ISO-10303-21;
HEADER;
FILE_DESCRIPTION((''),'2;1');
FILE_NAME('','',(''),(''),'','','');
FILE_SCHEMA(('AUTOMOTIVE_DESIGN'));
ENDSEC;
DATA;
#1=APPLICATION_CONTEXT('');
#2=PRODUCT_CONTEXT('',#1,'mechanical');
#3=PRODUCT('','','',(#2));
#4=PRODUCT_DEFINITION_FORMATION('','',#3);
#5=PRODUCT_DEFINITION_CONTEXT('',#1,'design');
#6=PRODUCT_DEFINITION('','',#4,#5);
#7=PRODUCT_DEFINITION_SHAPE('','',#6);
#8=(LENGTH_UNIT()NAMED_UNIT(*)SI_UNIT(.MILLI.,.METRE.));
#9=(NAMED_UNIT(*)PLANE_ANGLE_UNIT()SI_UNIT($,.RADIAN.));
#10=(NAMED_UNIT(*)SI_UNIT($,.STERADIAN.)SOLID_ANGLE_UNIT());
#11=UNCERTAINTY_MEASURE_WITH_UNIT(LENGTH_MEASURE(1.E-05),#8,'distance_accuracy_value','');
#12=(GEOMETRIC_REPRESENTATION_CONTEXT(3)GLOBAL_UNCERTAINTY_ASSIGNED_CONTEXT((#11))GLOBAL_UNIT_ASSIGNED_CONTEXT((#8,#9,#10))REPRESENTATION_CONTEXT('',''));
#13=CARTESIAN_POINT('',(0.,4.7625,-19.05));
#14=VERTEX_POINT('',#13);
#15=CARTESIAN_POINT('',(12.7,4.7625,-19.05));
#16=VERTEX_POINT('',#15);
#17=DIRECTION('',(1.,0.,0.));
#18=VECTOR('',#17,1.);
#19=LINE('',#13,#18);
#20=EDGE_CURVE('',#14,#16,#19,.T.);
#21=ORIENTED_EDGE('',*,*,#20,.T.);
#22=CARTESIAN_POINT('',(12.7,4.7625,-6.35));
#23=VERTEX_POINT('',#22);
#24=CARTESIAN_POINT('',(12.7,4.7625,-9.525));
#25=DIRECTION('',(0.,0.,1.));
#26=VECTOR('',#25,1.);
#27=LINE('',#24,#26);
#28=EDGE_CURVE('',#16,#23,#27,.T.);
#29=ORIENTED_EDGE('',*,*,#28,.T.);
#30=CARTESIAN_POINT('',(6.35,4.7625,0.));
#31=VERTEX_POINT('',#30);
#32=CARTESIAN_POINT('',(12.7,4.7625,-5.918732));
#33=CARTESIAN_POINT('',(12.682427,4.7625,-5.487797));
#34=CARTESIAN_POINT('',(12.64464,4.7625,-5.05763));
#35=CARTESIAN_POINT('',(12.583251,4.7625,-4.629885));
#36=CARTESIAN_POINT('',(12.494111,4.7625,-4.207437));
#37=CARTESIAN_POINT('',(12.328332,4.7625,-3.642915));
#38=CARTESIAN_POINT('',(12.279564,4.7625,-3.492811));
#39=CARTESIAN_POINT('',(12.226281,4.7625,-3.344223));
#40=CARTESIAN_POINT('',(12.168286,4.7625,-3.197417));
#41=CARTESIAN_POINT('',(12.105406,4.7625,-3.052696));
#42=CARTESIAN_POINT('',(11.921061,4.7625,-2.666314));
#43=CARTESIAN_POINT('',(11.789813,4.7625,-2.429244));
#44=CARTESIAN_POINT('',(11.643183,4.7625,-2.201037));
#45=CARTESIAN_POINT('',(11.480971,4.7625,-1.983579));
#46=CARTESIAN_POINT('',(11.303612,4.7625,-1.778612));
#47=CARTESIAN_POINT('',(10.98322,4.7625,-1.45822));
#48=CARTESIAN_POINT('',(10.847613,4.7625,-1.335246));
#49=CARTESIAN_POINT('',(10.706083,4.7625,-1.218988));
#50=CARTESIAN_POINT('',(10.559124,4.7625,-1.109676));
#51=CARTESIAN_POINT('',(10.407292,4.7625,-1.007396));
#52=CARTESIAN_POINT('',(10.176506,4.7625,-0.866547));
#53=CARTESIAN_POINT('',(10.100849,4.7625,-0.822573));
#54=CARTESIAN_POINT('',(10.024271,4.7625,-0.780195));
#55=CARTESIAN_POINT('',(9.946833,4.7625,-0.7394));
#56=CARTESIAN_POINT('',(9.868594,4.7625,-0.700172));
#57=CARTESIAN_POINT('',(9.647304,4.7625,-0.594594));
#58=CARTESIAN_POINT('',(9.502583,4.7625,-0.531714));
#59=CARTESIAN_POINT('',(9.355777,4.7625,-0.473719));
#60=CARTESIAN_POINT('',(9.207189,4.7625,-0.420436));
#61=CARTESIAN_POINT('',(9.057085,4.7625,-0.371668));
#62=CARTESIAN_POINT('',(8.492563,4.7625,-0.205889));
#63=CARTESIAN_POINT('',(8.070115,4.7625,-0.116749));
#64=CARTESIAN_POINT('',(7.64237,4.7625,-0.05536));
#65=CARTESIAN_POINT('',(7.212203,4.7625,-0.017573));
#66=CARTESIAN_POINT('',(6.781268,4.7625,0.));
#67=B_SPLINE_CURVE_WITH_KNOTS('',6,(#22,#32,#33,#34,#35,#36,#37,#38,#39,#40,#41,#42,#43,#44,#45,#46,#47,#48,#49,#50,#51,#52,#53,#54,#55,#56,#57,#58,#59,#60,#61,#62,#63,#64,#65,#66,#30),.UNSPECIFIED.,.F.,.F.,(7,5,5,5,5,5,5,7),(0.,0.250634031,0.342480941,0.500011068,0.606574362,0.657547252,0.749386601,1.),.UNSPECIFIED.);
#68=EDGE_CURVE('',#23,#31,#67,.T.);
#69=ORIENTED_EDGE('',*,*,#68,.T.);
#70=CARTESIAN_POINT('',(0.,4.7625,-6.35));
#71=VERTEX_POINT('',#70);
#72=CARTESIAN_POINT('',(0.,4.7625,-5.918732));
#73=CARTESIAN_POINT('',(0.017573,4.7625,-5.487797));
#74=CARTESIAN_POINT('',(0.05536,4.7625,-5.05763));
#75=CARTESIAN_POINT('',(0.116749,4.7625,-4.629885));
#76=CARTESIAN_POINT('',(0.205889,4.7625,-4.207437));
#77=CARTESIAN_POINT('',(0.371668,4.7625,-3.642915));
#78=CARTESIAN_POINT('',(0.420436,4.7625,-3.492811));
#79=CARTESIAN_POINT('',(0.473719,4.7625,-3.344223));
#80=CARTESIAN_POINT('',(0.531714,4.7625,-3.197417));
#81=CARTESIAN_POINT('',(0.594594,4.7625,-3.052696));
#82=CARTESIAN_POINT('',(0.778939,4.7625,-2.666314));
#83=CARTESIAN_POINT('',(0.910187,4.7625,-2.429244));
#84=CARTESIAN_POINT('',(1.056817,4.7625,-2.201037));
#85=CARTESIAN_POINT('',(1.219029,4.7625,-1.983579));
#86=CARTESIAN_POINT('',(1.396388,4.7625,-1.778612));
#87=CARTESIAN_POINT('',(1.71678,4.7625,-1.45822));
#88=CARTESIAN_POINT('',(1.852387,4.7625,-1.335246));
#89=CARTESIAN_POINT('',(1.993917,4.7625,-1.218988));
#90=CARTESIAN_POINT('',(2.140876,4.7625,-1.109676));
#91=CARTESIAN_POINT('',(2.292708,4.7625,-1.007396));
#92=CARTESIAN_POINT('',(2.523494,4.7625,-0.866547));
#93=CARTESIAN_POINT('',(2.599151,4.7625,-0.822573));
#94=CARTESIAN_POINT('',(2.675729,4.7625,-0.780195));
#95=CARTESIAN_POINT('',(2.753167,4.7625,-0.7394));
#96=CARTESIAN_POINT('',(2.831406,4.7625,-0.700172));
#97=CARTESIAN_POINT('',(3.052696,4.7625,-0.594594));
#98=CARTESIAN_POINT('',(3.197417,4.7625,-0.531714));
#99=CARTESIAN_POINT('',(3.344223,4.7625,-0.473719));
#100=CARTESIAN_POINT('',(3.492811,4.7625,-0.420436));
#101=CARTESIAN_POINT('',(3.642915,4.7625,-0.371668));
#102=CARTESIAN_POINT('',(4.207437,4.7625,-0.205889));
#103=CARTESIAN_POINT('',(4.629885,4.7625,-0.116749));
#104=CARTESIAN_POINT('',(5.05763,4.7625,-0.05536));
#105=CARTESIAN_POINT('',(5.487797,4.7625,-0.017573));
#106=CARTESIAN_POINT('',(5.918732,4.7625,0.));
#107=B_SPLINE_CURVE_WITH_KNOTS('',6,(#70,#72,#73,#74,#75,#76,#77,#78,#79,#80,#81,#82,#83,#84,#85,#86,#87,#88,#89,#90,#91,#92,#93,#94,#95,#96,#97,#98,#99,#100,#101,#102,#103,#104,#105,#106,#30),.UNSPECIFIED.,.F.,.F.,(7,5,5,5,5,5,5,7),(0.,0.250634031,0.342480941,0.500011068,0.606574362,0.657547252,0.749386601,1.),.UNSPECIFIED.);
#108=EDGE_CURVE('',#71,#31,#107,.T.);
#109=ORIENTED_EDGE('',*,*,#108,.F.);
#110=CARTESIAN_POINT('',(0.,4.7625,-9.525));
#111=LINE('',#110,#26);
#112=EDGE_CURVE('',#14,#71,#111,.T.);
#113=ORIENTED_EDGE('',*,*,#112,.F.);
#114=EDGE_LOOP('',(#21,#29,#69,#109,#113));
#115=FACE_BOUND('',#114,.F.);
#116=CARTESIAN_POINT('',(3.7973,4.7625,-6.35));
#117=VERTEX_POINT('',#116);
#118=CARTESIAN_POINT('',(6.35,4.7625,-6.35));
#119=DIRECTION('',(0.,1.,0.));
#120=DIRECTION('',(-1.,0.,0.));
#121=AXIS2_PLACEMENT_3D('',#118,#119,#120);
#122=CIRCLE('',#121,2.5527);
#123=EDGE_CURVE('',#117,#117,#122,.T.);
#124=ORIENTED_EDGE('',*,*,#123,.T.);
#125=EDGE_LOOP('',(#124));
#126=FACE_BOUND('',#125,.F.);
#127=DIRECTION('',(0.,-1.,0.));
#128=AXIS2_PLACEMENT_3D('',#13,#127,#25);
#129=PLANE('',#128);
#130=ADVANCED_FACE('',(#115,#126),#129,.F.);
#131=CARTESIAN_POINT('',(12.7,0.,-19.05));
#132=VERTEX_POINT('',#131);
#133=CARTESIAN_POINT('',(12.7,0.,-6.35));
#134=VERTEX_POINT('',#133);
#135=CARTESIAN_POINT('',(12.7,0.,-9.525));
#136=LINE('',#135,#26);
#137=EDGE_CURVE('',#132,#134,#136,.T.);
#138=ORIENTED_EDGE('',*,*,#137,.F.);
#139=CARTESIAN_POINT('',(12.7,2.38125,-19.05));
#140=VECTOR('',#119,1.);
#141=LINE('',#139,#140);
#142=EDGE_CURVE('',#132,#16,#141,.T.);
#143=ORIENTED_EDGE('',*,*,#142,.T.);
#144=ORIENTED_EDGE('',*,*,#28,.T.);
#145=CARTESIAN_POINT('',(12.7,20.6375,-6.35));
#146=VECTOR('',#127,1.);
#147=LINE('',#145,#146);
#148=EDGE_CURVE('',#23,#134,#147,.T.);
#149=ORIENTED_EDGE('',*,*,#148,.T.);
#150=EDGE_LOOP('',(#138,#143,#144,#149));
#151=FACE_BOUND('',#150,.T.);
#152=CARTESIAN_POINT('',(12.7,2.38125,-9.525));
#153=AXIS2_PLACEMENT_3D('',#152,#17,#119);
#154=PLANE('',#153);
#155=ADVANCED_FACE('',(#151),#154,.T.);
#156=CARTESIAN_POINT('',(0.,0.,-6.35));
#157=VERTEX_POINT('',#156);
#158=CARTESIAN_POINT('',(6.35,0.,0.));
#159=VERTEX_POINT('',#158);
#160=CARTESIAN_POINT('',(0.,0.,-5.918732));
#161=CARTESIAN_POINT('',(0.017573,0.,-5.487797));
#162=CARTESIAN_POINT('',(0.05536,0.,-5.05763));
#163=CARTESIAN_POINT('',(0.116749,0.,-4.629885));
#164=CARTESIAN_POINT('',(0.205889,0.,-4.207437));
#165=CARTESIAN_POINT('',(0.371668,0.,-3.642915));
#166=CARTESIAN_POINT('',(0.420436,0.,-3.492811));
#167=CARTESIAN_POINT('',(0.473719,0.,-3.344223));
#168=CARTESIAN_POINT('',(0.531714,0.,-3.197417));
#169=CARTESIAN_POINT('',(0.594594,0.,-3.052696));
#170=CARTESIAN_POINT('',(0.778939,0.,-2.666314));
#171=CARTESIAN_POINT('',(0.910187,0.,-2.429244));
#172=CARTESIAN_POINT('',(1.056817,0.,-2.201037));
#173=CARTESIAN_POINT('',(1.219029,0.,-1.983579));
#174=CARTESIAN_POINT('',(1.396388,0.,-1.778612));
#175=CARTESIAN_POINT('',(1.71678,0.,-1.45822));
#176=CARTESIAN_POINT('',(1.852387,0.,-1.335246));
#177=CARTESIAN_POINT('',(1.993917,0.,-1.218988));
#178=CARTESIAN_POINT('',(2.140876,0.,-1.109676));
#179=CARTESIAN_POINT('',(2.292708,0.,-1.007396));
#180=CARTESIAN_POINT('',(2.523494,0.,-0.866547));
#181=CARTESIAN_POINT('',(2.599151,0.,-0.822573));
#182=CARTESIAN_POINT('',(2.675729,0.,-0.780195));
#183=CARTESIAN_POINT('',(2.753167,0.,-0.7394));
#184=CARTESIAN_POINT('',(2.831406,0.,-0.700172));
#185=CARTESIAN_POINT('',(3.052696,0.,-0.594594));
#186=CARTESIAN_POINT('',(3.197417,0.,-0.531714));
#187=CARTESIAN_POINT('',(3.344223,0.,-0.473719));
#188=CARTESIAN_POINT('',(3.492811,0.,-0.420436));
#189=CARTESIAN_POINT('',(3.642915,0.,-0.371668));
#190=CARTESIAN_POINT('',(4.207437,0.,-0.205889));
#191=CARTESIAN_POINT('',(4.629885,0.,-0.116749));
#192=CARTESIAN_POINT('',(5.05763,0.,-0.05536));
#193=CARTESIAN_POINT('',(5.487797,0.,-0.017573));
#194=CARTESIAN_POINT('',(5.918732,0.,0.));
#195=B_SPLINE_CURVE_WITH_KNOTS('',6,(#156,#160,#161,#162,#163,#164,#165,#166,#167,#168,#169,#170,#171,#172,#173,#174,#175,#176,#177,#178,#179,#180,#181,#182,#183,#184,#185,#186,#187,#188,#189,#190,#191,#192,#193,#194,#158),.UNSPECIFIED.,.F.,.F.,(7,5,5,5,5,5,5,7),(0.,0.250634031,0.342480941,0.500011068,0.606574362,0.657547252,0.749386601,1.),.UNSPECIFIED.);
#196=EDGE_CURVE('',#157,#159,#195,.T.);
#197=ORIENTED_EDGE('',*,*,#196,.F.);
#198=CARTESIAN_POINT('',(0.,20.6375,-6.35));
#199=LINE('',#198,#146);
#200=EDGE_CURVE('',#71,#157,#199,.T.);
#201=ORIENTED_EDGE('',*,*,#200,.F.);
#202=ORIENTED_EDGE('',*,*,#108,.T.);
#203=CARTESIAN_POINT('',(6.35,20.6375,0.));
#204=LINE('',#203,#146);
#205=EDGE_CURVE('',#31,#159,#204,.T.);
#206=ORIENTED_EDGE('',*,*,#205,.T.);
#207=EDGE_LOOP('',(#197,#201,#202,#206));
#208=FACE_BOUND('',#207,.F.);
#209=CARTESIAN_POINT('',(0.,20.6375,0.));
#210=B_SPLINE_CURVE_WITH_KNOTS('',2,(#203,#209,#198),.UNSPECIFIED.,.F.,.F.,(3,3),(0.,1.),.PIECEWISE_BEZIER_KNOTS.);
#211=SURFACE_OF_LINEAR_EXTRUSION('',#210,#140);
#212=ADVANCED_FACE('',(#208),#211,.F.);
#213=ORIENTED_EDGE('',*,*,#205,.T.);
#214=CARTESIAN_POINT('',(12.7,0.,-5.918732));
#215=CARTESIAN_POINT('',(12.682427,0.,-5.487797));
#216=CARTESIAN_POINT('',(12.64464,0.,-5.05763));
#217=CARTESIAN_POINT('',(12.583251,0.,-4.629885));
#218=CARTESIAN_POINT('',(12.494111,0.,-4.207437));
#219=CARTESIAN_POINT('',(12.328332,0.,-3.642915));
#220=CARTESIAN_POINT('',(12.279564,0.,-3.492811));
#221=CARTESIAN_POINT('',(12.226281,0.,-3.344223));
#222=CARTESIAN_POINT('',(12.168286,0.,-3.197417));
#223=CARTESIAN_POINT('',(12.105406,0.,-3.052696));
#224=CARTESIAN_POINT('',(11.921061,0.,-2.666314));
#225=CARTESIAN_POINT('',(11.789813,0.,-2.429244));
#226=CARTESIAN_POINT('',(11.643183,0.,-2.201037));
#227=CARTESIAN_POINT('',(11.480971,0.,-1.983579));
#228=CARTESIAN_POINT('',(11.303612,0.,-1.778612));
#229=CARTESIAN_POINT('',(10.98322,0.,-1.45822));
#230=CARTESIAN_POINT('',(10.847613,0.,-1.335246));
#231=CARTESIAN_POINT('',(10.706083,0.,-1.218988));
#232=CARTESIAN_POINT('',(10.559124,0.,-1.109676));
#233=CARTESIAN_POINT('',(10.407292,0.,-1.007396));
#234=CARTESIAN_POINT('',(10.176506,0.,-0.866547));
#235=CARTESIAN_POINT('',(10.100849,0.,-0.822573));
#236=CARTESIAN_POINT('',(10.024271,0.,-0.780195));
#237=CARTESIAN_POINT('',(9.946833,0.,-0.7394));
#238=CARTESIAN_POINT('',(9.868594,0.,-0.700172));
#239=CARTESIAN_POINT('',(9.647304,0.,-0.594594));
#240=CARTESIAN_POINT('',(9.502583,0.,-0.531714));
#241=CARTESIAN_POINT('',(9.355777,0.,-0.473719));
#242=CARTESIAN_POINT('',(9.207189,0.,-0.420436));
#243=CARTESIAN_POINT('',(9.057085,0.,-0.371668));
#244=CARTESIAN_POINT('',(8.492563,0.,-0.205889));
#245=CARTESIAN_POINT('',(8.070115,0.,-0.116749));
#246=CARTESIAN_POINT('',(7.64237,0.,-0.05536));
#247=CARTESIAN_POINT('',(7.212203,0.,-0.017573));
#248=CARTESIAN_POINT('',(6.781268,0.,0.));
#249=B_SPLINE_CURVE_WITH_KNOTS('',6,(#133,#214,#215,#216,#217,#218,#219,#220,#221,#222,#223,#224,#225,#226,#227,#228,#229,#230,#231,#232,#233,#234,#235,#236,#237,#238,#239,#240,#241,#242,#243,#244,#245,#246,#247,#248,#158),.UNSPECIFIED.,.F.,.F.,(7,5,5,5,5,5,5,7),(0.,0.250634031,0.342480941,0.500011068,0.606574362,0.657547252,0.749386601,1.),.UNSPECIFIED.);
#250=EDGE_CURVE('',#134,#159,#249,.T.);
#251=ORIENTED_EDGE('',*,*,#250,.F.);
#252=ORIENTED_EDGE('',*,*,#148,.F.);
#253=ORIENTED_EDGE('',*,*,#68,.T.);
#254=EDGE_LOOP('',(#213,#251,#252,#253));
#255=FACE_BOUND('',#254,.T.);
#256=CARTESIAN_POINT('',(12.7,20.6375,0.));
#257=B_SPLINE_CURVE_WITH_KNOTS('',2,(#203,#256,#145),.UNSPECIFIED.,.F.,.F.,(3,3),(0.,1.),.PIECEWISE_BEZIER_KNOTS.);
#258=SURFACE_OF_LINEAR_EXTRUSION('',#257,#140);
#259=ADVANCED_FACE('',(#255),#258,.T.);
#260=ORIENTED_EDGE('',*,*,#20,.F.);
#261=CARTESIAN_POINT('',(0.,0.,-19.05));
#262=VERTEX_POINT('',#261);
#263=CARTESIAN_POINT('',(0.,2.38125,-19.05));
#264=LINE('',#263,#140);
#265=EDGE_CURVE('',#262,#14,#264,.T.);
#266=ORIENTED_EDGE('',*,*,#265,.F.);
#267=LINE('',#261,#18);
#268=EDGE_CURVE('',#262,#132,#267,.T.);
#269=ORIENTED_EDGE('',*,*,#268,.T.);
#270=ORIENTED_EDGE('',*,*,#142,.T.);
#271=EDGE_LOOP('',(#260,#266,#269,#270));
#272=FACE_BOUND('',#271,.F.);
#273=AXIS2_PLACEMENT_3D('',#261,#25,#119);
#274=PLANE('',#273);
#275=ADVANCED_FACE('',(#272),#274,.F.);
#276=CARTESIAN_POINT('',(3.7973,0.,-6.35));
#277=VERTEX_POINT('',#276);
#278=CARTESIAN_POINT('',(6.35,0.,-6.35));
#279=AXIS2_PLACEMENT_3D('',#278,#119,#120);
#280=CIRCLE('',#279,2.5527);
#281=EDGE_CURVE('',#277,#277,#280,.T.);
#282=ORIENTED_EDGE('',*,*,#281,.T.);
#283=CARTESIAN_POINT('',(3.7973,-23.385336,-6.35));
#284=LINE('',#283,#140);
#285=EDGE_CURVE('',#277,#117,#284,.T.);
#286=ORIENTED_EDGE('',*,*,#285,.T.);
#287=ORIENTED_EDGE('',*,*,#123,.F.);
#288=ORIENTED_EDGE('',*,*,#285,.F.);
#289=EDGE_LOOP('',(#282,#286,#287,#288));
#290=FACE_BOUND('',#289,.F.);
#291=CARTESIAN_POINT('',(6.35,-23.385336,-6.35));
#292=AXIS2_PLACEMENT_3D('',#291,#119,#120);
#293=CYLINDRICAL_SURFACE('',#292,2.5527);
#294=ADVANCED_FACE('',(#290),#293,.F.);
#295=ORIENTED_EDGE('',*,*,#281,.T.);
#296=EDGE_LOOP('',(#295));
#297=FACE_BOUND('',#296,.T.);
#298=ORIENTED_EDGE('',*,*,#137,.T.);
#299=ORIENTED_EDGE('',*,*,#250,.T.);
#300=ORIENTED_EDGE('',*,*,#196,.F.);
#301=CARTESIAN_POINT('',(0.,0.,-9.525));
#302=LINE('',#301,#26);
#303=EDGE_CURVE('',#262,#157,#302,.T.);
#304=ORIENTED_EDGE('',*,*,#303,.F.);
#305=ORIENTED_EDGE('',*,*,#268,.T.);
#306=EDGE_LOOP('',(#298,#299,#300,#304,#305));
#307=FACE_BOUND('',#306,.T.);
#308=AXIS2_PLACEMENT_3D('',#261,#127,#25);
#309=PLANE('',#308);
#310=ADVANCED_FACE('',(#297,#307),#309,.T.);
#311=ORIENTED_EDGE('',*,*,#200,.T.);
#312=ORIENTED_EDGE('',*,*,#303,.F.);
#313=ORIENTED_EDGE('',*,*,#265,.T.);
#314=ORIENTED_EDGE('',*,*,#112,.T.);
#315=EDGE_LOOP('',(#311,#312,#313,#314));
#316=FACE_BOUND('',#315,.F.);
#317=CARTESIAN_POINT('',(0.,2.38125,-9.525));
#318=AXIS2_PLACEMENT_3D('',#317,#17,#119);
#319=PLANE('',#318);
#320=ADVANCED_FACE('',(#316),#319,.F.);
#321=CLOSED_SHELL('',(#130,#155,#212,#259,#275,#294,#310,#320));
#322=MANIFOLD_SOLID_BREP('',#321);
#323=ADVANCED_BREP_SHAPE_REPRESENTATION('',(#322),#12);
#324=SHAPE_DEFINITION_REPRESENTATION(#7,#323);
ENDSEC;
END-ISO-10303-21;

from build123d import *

# Parameters (mm, degrees)
F0_W        = 4.7625
F0_H        = 19.05
F1_DEPTH    = 12.7
F3_T1_DEPTH = 36.5125
F4_D        = 5.1054


# Not quite as in the source:
# - a fillet or chamfer that OpenCascade refuses, or shapes differently, is made with other operations: its cross-section is extruded or revolved along the edge and cut away or added


with BuildPart() as f1:
    # F0 (on Right) → F1 (new body)
    with BuildSketch(Plane.YZ):
        with Locations((2.38125, -9.525)):
            Rectangle(F0_W, F0_H)
    extrude(amount=F1_DEPTH)

    # F3: fillet of radius 6.35 on 2 edges, made by hand

    # F3_s2 → F3_t1 (cut)
    with BuildSketch(Plane.XZ.offset(-20.6375)):
        with BuildLine():
            add(Edge.make_bspline(
                [(6.35, 0), (0, 0), (0, -6.35)],
                knots=[0, 0, 0, 1, 1, 1], degree=2, weights=[1, 1, 1]))
            Line((0, -6.35), (0, 0))
            Line((0, 0), (6.35, 0))
        make_face()
        with BuildLine():
            add(Edge.make_bspline(
                [(6.35, 0), (12.7, 0), (12.7, -6.35)],
                knots=[0, 0, 0, 1, 1, 1], degree=2, weights=[1, 1, 1]))
            Line((12.7, -6.35), (12.7, 0))
            Line((12.7, 0), (6.35, 0))
        make_face()
    extrude(amount=F3_T1_DEPTH, mode=Mode.SUBTRACT)

    # F4 (through all)
    with Locations(Plane.XZ):
        with Locations((6.35, -6.35)):
            Hole(F4_D / 2)


solid = f1.part
